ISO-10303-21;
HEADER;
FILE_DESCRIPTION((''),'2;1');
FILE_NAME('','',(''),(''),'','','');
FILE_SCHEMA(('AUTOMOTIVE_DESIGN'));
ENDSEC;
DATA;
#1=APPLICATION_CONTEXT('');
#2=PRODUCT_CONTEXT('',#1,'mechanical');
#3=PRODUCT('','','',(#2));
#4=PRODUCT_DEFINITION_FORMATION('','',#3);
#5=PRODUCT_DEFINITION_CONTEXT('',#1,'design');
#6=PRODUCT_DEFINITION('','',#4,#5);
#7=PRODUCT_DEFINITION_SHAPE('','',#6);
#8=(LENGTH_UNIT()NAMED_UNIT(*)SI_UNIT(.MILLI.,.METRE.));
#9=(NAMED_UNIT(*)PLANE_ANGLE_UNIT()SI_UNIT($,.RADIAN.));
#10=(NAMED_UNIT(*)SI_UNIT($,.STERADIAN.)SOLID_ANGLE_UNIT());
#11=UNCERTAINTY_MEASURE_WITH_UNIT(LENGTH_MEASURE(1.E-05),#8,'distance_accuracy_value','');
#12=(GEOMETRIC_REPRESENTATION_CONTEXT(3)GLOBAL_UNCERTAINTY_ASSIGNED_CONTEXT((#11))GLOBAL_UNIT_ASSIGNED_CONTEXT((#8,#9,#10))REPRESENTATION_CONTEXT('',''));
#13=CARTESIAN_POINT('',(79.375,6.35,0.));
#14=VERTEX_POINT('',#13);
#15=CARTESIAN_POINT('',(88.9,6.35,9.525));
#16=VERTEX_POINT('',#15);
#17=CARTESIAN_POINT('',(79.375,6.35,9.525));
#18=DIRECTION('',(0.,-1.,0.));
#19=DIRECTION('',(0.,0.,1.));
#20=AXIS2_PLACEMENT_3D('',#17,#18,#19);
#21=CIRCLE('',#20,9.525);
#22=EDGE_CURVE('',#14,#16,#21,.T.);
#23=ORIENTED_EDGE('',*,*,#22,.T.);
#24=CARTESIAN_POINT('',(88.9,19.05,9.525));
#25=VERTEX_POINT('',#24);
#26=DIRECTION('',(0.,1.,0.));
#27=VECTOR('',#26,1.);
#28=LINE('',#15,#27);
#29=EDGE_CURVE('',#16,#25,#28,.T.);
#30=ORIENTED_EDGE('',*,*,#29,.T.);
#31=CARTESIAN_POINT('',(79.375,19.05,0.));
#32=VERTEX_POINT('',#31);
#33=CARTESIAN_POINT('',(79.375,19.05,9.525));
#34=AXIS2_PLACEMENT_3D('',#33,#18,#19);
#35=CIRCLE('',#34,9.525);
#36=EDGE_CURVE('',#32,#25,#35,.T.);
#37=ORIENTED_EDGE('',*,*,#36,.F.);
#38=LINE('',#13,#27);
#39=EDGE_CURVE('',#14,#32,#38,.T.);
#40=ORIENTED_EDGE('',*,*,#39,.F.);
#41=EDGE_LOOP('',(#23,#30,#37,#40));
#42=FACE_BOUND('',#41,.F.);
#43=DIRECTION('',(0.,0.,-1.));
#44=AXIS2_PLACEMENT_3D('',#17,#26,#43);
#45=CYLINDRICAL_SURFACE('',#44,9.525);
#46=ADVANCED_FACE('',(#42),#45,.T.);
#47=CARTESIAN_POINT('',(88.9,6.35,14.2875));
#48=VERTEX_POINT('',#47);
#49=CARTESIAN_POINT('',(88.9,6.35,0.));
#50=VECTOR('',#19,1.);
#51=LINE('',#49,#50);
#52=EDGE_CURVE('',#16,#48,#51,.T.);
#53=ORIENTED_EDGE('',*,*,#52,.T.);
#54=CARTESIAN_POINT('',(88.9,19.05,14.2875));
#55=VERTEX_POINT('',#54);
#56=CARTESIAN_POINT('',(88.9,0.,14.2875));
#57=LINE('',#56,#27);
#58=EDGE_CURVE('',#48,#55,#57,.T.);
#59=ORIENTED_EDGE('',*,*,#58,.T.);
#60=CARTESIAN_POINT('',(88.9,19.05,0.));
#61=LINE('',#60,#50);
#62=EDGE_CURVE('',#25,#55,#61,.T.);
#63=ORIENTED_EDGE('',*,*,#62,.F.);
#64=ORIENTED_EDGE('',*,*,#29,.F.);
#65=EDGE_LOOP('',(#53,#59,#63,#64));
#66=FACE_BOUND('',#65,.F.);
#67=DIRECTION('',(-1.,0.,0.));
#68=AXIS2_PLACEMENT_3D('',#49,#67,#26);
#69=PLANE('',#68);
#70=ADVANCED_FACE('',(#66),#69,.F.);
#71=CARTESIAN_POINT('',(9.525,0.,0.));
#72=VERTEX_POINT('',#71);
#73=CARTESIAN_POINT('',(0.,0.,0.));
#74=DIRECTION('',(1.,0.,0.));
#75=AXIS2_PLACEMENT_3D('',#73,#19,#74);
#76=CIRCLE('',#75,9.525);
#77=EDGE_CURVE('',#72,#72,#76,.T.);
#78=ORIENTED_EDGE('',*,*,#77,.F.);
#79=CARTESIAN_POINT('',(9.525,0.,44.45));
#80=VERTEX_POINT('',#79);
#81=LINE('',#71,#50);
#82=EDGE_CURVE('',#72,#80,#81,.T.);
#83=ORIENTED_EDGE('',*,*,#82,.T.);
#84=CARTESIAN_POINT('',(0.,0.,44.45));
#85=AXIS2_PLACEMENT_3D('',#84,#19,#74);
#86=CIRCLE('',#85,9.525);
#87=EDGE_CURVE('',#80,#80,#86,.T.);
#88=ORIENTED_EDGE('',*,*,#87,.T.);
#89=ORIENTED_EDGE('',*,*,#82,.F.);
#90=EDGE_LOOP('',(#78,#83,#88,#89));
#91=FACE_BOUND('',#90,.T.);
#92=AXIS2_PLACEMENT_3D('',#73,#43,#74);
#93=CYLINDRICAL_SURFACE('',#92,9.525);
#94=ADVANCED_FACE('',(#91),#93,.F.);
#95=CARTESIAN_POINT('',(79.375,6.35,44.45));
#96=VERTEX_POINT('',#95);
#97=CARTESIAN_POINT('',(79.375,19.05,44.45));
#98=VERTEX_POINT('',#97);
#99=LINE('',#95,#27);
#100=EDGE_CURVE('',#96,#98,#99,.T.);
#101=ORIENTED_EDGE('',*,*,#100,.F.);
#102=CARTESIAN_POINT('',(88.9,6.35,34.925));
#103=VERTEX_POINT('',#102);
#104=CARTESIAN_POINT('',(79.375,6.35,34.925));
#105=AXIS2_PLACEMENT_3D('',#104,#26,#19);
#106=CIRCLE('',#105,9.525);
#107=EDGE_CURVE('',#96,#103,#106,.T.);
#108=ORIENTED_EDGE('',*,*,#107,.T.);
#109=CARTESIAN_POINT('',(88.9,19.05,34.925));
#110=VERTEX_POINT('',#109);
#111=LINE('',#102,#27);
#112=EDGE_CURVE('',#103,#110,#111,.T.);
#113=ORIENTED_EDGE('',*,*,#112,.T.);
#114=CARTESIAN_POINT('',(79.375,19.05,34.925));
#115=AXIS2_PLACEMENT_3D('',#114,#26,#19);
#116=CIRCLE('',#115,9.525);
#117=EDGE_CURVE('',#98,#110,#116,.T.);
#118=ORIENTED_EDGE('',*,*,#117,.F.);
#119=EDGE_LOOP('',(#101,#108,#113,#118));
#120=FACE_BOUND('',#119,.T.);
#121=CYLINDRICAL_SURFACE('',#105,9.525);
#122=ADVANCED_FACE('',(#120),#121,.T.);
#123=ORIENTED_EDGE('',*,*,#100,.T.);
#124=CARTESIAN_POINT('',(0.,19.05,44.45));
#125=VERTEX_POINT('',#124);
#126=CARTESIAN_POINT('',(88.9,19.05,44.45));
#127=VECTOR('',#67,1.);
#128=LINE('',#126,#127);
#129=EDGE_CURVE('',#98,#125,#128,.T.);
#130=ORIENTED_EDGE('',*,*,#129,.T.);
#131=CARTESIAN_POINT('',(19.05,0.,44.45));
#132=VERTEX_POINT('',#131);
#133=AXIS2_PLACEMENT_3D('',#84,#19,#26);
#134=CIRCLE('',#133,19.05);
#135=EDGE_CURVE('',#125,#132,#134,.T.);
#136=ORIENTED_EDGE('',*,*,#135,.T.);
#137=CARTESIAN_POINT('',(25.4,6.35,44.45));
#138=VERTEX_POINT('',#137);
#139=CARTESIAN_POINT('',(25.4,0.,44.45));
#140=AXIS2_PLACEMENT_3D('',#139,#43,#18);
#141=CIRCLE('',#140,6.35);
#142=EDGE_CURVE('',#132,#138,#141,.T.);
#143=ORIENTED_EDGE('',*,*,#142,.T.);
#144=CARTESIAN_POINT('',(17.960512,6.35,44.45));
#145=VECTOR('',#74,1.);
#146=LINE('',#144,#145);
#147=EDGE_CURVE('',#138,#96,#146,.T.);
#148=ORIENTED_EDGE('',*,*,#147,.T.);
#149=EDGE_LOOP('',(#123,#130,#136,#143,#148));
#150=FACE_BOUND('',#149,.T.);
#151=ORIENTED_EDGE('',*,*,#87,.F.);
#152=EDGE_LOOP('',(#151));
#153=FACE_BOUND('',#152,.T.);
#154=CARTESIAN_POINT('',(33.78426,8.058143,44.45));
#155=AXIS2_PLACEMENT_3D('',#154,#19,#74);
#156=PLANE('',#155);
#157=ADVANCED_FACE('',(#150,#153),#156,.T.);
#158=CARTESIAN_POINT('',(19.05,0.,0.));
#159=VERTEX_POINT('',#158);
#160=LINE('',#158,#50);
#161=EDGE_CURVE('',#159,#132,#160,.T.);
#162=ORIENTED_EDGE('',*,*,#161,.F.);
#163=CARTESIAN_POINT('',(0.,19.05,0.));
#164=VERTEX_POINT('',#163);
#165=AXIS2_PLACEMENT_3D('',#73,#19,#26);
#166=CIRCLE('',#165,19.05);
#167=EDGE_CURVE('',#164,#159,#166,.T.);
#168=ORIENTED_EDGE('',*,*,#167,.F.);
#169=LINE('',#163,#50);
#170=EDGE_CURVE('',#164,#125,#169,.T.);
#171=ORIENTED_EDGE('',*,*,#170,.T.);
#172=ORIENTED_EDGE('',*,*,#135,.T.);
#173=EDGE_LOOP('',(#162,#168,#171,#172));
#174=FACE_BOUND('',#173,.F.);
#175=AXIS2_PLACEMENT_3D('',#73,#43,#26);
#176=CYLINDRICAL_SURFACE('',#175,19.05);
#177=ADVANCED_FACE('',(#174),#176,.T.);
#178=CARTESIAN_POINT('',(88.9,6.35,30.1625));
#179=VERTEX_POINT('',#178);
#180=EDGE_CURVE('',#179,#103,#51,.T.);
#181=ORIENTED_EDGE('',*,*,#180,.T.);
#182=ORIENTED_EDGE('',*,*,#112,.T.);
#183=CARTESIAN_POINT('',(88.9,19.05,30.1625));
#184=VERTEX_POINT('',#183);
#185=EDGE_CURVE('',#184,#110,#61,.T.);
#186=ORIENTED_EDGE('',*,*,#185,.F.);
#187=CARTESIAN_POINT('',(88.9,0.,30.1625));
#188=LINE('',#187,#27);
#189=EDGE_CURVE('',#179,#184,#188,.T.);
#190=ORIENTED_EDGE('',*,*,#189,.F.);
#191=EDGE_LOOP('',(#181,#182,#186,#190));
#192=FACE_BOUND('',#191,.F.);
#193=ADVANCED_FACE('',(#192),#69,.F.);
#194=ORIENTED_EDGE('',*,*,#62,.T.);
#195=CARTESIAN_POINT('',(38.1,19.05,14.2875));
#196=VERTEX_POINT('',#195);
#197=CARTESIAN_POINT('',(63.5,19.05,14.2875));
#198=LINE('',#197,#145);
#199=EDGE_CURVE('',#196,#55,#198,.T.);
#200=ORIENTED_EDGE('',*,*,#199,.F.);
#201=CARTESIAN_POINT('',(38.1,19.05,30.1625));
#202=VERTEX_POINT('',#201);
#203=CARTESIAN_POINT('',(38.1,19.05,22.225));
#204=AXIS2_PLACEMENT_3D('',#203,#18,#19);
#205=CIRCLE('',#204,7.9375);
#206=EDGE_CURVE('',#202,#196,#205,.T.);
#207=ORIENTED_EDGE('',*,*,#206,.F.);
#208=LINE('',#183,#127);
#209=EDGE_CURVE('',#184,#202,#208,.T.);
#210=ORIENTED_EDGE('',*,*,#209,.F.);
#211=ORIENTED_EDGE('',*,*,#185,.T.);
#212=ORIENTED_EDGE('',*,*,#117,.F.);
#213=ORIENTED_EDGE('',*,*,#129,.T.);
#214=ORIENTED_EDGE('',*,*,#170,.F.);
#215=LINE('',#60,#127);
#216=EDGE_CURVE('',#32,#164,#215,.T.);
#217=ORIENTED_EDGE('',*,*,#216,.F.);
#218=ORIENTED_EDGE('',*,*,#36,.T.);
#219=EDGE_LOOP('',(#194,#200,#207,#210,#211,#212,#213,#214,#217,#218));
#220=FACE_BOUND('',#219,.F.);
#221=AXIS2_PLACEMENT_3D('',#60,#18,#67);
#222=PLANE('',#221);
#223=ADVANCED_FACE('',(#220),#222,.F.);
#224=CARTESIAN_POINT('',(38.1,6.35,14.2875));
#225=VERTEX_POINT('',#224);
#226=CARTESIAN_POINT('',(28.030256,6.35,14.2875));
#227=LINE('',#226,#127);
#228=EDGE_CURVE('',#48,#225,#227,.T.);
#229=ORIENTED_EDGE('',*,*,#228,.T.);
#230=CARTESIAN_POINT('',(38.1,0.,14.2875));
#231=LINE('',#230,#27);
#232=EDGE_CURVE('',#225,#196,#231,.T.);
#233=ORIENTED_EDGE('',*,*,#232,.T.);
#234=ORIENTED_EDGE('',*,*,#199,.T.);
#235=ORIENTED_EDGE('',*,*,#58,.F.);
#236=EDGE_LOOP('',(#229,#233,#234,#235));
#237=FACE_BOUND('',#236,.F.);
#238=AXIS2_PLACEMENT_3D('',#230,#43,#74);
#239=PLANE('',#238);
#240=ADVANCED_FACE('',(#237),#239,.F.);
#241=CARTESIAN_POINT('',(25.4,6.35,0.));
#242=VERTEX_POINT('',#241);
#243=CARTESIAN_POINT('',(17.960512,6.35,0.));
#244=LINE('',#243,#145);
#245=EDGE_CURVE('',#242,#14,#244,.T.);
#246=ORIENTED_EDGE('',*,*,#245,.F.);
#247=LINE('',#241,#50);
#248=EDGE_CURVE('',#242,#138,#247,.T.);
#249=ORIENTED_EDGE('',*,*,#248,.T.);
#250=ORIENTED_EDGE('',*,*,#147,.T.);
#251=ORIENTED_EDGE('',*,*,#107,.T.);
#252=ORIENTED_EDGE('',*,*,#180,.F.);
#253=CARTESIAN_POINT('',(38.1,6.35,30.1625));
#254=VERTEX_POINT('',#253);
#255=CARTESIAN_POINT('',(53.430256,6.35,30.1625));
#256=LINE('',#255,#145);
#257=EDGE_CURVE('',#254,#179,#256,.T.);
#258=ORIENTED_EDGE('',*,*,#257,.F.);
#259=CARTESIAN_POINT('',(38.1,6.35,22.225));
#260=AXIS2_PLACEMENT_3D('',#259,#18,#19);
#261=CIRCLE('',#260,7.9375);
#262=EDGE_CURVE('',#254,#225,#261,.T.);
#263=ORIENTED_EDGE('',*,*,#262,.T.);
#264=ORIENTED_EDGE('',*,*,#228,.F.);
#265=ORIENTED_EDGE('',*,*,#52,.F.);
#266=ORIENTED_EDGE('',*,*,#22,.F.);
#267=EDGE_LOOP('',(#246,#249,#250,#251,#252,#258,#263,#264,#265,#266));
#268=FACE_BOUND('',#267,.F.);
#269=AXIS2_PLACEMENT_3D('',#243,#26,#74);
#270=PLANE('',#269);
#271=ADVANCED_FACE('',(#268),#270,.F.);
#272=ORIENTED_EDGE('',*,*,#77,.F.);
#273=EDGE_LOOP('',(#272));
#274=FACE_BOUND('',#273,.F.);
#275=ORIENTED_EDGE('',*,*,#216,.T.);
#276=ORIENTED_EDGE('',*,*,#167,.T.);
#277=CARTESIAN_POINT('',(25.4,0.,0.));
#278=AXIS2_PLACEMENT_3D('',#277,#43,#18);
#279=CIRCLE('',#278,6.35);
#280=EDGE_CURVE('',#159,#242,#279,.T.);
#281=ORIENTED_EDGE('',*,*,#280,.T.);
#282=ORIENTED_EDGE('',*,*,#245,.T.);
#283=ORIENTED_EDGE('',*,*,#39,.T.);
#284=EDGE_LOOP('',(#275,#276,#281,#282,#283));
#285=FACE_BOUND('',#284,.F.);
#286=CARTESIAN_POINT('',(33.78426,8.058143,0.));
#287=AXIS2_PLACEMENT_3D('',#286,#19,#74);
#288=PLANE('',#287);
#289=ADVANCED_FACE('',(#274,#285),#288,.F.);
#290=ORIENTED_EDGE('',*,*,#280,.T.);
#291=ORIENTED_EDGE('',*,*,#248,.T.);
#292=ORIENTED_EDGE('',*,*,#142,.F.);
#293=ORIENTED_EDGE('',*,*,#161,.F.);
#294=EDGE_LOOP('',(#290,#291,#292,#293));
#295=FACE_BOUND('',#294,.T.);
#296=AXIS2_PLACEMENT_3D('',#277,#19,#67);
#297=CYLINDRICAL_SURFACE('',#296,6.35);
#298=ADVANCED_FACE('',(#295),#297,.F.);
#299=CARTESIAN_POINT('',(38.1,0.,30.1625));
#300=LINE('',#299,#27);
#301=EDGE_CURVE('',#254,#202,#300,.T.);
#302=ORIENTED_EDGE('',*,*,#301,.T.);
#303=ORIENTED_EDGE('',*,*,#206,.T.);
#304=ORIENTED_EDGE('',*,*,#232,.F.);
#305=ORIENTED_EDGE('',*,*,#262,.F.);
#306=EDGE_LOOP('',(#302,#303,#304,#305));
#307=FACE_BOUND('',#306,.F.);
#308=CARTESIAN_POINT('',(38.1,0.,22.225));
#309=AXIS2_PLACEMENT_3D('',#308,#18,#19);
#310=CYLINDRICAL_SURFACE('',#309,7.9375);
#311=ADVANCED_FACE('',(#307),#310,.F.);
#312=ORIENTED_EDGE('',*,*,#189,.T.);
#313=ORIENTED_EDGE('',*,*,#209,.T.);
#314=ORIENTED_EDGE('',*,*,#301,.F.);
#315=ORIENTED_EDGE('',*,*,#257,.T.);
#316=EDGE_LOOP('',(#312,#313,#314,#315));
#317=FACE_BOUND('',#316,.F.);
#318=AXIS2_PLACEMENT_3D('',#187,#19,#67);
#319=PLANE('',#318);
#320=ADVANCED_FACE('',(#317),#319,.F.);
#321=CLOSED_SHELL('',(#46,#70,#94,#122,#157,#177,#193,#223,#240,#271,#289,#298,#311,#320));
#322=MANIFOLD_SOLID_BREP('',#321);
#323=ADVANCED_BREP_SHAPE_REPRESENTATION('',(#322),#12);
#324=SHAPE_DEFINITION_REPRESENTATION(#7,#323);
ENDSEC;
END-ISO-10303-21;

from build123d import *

# Parameters (mm, degrees)
F0_R     = 9.525
F1_DEPTH = 44.45
F3_DEPTH = 19.051
F4_R     = 9.525
F5_R     = 6.35


# Not quite as in the source:
# - a length typed as a fraction of an inch, garbled in the dataset ("3 / 203.2 mm" for 3/8 in), is restored


with BuildPart() as f1:
    # F0 (on Top) → F1 (new body)
    with BuildSketch(Plane.XY):
        with BuildLine():
            Line((88.9, 19.05), (0, 19.05))
            ThreePointArc((0, 19.05), (-10.9985226281, -15.5542598667), (17.9605122421, 6.35))
            Line((17.9605122421, 6.35), (88.9, 6.35))
            Line((88.9, 6.35), (88.9, 19.05))
        make_face()
        Circle(F0_R, mode=Mode.SUBTRACT)
    extrude(amount=F1_DEPTH)

    # F2 (on Front) → F3 (cut, through all)
    with BuildSketch(Plane.XZ):
        with BuildLine():
            Line((88.9, 14.2875), (88.9, 30.1625))
            Line((88.9, 30.1625), (38.1, 30.1625))
            ThreePointArc((38.1, 30.1625), (30.1625, 22.225), (38.1, 14.2875))
            Line((38.1, 14.2875), (88.9, 14.2875))
        make_face()
    extrude(amount=-F3_DEPTH, mode=Mode.SUBTRACT)

    # F4
    f4_edges = [f1.edges().sort_by_distance(p)[0] for p in [
        (88.9, 12.7, 44.45),
        (88.9, 12.7, 0),
    ]]
    fillet(f4_edges, radius=F4_R)

    # F5
    f5_edges = [f1.edges().sort_by_distance(p)[0] for p in [
        (17.960512, 6.35, 22.225),
    ]]
    fillet(f5_edges, radius=F5_R)


solid = f1.part
